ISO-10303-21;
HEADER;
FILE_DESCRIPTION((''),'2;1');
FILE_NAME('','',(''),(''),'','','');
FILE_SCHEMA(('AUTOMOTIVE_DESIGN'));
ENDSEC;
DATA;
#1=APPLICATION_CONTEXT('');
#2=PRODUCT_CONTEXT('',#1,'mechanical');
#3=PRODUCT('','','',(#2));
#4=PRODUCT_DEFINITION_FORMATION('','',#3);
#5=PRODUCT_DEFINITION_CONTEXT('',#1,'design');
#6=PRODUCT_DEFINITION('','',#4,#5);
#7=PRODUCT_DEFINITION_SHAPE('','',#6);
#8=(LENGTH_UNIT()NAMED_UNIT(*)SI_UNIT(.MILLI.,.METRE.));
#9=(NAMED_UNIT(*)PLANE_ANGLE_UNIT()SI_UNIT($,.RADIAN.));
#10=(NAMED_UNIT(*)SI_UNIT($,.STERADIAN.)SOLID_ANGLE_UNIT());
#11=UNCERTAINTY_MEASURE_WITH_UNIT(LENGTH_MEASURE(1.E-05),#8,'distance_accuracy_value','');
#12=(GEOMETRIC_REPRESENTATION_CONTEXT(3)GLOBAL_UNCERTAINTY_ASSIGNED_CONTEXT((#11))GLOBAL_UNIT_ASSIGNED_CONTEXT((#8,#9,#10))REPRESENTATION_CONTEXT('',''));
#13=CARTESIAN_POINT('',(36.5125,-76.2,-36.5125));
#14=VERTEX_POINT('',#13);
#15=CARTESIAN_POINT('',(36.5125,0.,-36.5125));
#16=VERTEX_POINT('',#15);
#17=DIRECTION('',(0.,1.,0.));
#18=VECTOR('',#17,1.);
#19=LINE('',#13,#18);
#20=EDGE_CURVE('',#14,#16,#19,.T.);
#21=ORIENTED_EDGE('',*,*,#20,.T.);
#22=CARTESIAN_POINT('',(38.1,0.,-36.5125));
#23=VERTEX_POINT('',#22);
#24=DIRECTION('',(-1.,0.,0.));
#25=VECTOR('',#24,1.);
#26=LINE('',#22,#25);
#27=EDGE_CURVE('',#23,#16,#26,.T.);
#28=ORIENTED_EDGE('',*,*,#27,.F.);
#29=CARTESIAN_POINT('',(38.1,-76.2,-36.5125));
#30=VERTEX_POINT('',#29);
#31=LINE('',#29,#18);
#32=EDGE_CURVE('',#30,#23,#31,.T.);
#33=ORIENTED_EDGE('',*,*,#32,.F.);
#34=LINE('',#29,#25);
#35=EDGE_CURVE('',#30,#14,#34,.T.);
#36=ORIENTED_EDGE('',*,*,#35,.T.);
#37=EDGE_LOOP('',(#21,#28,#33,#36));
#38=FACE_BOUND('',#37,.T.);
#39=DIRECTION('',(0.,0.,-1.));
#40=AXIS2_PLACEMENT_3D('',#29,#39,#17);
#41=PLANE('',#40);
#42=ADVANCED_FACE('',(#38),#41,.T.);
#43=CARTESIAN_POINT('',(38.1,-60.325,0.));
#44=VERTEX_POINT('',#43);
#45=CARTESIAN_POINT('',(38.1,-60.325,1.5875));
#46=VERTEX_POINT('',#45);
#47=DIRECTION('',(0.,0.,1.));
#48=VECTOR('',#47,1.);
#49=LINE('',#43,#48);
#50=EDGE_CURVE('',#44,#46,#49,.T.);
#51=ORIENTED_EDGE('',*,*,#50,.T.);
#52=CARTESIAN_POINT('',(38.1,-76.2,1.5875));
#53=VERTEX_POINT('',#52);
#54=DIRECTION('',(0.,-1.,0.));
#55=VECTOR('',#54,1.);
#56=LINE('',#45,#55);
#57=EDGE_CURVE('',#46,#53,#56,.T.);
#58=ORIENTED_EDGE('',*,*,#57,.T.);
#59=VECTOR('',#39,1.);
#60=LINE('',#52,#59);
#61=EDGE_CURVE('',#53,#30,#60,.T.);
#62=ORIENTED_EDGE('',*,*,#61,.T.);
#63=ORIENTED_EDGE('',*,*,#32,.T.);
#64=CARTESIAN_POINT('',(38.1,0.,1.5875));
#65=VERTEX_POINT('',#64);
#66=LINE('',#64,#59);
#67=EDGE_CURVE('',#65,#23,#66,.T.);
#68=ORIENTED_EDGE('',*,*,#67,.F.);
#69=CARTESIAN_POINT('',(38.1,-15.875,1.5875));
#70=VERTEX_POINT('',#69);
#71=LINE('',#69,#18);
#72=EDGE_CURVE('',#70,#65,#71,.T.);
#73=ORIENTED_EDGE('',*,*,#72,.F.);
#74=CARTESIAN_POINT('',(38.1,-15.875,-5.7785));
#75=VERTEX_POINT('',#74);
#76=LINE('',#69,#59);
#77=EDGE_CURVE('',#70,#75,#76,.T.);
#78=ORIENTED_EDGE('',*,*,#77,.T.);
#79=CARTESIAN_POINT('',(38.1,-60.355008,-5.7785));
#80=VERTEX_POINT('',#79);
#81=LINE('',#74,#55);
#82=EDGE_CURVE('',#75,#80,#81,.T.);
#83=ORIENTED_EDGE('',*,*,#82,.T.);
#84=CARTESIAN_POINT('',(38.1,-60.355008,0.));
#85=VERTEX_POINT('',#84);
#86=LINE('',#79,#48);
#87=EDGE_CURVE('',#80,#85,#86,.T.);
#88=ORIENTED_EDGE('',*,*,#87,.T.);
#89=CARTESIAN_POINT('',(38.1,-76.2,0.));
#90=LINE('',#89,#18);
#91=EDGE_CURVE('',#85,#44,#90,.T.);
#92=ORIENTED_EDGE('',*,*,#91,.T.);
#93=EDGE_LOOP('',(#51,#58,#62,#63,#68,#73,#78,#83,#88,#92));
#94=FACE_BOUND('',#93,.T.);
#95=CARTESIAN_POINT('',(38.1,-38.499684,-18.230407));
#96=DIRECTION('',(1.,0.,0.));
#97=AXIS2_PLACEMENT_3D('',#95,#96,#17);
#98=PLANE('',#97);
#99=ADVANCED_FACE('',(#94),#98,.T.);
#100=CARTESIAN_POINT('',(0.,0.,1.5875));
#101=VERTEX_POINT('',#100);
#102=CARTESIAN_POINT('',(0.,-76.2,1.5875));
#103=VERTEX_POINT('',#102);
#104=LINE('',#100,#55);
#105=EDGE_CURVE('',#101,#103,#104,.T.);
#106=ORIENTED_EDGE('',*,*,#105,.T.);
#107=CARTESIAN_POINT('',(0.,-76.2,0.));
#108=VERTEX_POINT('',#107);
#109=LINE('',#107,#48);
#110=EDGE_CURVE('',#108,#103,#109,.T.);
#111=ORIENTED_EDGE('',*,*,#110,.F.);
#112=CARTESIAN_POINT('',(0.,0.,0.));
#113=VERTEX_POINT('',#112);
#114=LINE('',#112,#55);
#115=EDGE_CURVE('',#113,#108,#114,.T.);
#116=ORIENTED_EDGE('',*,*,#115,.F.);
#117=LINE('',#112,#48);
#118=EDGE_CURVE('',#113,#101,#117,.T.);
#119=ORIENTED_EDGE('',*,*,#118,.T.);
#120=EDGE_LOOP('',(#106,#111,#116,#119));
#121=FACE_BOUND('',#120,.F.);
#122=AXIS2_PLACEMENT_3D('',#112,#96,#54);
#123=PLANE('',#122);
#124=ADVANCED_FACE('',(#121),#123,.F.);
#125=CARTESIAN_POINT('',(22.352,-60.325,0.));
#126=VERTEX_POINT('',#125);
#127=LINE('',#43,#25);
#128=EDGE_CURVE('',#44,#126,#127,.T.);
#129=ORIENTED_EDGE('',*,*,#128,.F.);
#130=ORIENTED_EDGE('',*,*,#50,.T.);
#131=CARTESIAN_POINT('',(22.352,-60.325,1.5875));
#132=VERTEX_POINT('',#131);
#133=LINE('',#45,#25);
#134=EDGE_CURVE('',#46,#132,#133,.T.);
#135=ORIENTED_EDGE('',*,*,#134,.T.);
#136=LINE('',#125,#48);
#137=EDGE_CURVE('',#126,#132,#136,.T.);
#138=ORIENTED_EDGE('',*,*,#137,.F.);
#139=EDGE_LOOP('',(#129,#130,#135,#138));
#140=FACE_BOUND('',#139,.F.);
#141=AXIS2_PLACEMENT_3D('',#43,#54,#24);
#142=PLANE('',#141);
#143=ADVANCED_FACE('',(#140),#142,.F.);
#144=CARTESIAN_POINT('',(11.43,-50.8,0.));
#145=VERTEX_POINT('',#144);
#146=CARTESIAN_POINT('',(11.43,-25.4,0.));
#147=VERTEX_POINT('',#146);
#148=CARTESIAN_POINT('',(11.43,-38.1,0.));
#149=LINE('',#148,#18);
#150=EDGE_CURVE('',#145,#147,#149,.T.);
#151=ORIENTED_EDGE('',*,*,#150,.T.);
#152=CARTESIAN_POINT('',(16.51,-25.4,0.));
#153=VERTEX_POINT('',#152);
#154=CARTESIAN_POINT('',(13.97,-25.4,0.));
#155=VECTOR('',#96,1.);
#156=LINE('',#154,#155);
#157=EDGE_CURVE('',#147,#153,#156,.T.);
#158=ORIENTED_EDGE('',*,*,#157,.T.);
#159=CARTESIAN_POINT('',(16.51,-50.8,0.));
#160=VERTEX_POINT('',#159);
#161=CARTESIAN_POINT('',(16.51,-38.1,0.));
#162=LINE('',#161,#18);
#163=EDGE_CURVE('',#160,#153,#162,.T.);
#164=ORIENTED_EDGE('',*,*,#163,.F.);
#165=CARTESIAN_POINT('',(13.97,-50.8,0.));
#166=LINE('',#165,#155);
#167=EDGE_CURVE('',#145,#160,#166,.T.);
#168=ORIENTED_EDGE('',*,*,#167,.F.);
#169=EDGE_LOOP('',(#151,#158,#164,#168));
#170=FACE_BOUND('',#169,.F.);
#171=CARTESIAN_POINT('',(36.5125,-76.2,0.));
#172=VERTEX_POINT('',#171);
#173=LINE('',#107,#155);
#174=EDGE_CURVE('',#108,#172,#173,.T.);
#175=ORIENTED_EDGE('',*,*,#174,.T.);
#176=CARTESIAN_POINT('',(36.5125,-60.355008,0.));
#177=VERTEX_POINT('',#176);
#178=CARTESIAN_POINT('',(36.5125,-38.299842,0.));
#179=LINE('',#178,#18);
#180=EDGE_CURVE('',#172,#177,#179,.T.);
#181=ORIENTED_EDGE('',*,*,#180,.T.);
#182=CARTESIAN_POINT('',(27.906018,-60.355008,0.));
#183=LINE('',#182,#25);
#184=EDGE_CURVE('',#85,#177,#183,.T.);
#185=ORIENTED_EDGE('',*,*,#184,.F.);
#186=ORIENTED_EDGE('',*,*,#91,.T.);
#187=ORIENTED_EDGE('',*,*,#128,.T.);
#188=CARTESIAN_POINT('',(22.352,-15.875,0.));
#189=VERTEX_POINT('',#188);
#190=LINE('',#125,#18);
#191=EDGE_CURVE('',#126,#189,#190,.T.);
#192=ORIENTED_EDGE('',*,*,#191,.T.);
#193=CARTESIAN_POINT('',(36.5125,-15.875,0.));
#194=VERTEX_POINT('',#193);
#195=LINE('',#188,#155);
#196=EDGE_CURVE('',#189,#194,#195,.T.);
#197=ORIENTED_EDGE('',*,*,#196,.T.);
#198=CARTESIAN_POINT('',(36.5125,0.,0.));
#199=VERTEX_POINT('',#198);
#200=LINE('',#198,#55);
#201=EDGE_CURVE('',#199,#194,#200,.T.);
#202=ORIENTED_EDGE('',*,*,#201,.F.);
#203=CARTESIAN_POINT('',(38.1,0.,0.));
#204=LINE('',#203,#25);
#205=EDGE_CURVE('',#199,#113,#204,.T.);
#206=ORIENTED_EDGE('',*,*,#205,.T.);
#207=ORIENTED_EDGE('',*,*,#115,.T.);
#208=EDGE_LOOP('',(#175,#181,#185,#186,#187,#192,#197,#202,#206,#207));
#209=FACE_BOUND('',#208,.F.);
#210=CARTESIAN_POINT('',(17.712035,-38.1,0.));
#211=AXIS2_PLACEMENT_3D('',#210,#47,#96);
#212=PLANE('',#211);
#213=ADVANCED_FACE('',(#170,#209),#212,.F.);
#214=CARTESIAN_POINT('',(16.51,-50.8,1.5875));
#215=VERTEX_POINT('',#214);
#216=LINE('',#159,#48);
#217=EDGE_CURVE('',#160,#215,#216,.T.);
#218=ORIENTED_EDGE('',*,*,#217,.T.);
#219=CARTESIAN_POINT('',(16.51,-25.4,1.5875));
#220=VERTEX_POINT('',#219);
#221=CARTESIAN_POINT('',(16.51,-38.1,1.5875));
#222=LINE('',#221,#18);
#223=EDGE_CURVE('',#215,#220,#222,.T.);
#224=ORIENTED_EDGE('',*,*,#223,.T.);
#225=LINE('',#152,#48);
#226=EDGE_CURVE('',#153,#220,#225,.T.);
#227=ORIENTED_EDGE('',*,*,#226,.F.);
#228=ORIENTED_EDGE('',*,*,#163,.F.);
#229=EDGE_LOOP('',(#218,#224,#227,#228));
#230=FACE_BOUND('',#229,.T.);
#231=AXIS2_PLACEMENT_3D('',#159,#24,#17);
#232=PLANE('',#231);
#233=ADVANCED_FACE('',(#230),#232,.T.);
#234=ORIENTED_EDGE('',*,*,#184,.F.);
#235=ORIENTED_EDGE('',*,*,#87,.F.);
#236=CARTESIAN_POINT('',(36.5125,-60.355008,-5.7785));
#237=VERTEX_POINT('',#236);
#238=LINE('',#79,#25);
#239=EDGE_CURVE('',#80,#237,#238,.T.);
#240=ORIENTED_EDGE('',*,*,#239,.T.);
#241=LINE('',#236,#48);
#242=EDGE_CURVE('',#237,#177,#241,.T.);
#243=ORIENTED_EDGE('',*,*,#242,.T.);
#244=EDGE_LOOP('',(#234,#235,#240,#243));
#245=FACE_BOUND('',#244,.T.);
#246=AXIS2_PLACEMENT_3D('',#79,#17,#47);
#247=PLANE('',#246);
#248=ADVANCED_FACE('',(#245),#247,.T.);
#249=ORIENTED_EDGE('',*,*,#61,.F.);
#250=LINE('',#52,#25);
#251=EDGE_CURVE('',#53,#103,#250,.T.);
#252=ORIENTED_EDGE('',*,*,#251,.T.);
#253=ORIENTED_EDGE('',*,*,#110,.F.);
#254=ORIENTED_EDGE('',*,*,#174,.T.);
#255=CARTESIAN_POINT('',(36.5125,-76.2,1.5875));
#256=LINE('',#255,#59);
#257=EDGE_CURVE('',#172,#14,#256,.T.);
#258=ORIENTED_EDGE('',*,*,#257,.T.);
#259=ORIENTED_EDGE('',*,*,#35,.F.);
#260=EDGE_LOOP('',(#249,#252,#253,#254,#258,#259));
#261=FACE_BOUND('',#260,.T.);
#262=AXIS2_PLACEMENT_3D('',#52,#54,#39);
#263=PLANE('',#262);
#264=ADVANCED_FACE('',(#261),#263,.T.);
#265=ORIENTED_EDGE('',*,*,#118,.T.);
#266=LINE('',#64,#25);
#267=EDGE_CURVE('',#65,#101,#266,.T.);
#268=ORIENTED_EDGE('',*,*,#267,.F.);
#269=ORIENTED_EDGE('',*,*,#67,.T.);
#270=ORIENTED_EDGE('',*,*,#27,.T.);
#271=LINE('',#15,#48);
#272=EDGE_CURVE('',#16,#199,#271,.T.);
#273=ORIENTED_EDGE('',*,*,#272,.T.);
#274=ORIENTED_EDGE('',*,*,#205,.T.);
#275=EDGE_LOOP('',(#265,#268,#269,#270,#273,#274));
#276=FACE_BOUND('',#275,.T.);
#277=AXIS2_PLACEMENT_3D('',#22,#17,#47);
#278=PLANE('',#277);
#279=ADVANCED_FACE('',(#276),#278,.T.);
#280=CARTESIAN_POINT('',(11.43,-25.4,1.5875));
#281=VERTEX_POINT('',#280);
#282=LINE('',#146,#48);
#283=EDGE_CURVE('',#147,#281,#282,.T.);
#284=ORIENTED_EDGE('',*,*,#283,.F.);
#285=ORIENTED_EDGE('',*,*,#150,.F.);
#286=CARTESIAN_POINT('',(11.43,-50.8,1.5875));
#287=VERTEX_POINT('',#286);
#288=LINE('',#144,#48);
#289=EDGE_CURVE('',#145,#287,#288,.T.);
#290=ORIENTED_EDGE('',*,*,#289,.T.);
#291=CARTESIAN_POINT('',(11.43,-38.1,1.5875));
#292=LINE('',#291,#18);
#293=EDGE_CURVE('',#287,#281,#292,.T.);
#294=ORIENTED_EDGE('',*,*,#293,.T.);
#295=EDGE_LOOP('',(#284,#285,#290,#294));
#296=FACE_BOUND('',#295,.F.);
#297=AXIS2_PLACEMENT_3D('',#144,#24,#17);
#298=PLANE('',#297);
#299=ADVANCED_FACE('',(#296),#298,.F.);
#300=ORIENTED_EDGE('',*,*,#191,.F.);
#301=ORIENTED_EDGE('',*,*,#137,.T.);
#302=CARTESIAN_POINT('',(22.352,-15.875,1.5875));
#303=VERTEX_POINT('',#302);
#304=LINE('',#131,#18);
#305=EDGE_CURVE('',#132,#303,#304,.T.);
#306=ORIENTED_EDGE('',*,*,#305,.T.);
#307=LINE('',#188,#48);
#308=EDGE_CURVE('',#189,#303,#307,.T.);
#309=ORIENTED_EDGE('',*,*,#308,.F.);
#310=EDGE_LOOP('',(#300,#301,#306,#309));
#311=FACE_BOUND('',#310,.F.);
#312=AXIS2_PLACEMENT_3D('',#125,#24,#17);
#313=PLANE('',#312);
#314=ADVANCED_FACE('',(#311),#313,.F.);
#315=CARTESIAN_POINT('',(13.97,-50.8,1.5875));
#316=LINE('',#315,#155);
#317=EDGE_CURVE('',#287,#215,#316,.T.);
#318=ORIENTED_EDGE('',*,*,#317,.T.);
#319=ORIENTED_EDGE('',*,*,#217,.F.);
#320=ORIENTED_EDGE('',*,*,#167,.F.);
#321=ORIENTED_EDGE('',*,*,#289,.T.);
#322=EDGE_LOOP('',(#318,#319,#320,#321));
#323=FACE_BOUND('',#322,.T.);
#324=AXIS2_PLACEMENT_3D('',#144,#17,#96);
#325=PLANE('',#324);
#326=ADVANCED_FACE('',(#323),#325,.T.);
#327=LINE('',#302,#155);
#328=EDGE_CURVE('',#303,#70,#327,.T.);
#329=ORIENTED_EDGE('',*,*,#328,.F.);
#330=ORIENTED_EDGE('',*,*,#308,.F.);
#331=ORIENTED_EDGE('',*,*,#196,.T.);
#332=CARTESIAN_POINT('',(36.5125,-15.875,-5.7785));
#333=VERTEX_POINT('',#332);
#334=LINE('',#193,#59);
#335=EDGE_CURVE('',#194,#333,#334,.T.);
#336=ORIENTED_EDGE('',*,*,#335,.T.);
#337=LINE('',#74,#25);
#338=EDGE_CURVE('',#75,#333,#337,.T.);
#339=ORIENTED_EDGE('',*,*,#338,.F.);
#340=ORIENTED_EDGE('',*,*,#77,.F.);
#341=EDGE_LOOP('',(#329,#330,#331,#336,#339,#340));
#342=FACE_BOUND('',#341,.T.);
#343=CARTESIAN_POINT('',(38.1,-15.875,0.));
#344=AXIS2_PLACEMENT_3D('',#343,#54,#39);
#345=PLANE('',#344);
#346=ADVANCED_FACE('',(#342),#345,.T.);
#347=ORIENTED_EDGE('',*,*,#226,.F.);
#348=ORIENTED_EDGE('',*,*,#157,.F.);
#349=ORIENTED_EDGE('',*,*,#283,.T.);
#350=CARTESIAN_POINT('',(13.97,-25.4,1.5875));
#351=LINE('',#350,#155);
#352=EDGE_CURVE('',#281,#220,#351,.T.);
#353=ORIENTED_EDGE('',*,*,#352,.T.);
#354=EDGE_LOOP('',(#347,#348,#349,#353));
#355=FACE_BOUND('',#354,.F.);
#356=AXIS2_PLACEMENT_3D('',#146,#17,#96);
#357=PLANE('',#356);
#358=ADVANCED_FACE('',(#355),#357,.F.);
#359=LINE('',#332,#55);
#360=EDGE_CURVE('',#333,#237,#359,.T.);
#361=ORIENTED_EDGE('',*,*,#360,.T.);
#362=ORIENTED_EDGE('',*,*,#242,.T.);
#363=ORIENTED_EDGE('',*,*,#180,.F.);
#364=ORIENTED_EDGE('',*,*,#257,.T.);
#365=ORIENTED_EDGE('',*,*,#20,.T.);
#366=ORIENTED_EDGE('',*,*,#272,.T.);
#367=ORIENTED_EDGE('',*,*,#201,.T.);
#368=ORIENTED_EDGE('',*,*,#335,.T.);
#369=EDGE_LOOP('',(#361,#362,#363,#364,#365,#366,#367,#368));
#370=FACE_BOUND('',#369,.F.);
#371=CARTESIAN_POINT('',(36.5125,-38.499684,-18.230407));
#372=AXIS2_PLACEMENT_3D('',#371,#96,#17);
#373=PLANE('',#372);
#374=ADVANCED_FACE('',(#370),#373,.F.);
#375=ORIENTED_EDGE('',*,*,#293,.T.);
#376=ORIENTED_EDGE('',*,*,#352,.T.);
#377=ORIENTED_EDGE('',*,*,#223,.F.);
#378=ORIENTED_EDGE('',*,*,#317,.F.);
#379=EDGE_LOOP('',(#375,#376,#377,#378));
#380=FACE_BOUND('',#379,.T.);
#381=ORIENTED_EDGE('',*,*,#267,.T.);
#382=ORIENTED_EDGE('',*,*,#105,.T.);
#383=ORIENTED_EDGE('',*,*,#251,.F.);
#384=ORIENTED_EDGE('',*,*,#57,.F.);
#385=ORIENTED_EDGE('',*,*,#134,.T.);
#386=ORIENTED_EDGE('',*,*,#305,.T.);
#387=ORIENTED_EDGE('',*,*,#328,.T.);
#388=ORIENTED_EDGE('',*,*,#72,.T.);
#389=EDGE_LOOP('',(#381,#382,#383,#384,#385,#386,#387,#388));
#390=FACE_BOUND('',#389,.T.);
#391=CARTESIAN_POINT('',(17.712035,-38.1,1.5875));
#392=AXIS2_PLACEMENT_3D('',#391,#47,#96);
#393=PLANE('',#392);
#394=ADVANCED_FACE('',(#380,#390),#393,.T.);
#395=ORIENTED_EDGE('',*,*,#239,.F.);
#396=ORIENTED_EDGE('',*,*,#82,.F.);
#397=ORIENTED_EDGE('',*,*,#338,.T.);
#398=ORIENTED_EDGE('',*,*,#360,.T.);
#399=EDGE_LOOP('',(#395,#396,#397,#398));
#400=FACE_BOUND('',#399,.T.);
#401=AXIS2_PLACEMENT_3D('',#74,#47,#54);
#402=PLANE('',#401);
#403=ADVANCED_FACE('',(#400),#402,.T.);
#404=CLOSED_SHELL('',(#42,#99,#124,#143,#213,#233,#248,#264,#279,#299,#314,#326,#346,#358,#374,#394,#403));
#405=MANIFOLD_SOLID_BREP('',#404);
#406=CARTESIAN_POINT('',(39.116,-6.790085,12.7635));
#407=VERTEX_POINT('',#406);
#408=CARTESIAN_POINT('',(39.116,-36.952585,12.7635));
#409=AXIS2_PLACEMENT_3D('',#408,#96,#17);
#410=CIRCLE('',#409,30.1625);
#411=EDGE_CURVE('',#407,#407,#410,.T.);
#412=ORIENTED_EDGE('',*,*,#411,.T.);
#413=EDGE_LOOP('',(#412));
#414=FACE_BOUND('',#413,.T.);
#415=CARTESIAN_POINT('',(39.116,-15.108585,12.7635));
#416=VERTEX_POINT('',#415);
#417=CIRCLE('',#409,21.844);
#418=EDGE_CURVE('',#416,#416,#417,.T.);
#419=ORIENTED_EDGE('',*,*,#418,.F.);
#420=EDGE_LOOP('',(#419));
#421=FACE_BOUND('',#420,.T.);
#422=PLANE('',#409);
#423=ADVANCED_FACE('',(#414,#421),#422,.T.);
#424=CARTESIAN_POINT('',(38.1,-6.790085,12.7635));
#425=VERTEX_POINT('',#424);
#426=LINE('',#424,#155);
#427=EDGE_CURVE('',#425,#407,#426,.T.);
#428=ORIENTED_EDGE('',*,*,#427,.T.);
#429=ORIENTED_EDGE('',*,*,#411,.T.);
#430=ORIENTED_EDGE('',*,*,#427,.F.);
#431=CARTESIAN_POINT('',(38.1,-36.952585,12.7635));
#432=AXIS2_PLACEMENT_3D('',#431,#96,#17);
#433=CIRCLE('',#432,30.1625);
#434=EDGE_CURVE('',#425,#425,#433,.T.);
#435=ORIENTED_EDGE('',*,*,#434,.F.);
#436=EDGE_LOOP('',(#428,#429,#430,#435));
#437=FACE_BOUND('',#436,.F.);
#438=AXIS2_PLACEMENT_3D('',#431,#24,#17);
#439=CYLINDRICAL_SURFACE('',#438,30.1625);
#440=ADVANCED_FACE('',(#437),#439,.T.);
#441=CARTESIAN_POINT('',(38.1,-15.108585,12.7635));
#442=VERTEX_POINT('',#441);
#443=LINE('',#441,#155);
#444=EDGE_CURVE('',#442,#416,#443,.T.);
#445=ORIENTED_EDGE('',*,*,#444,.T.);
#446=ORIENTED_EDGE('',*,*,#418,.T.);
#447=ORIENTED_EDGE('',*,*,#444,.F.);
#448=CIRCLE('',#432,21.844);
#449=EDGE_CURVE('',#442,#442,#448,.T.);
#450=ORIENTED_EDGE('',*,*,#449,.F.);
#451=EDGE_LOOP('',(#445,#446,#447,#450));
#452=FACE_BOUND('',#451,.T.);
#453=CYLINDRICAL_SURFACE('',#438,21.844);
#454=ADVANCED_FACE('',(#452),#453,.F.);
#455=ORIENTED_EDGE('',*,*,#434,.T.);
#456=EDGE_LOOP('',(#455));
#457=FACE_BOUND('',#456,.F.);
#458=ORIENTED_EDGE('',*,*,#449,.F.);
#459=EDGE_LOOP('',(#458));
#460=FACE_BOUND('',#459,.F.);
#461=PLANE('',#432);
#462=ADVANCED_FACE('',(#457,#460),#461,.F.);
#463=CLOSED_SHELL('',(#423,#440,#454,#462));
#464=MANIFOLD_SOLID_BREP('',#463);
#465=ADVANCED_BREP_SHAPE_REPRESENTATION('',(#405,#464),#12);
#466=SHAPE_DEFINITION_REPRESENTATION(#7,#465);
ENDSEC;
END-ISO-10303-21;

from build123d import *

# Parameters (mm, degrees)
F0_W     = 5.08
F0_H     = 25.4
F1_DEPTH = 1.5875
F3_DEPTH = 1.5875
F4_R     = 30.1625
F4_R_2   = 21.844
F5_DEPTH = 1.016


# Not quite as in the source:
# - a feature names something its author has since deleted; it is built from what else it names


with BuildPart() as f1:
    # F0 (on Top) → F1 (new body)
    with BuildSketch(Plane.XY):
        Polygon((38.1, 0), (0, 0), (0, -76.2), (38.1, -76.2), (38.1, -60.325), (22.352, -60.325), (22.352, -15.875), (38.1, -15.875), align=None)
        with Locations((13.97, -38.1)):
            Rectangle(F0_W, F0_H, mode=Mode.SUBTRACT)
    extrude(amount=F1_DEPTH)

    # F2 (on face) → F3 (join)
    with BuildSketch(Plane.YZ.offset(38.1)):
        Polygon((0, -36.5125), (0, 0), (-15.875, 0), (-15.875, -5.7785), (-60.3550081909, -5.7785), (-60.3550081909, 1.5875), (-76.2, 1.5875), (-76.2, -36.5125), align=None)
    extrude(amount=-F3_DEPTH)


with BuildPart() as f5:
    # F4 (on face) → F5 (new body)
    with BuildSketch(Plane.YZ.offset(38.1)):
        with Locations((-36.9525849819, 12.7635)):
            Circle(F4_R)
        with Locations((-36.9525849819, 12.7635)):
            Circle(F4_R_2, mode=Mode.SUBTRACT)
    extrude(amount=F5_DEPTH)


solid = Compound([f1.part, f5.part])
